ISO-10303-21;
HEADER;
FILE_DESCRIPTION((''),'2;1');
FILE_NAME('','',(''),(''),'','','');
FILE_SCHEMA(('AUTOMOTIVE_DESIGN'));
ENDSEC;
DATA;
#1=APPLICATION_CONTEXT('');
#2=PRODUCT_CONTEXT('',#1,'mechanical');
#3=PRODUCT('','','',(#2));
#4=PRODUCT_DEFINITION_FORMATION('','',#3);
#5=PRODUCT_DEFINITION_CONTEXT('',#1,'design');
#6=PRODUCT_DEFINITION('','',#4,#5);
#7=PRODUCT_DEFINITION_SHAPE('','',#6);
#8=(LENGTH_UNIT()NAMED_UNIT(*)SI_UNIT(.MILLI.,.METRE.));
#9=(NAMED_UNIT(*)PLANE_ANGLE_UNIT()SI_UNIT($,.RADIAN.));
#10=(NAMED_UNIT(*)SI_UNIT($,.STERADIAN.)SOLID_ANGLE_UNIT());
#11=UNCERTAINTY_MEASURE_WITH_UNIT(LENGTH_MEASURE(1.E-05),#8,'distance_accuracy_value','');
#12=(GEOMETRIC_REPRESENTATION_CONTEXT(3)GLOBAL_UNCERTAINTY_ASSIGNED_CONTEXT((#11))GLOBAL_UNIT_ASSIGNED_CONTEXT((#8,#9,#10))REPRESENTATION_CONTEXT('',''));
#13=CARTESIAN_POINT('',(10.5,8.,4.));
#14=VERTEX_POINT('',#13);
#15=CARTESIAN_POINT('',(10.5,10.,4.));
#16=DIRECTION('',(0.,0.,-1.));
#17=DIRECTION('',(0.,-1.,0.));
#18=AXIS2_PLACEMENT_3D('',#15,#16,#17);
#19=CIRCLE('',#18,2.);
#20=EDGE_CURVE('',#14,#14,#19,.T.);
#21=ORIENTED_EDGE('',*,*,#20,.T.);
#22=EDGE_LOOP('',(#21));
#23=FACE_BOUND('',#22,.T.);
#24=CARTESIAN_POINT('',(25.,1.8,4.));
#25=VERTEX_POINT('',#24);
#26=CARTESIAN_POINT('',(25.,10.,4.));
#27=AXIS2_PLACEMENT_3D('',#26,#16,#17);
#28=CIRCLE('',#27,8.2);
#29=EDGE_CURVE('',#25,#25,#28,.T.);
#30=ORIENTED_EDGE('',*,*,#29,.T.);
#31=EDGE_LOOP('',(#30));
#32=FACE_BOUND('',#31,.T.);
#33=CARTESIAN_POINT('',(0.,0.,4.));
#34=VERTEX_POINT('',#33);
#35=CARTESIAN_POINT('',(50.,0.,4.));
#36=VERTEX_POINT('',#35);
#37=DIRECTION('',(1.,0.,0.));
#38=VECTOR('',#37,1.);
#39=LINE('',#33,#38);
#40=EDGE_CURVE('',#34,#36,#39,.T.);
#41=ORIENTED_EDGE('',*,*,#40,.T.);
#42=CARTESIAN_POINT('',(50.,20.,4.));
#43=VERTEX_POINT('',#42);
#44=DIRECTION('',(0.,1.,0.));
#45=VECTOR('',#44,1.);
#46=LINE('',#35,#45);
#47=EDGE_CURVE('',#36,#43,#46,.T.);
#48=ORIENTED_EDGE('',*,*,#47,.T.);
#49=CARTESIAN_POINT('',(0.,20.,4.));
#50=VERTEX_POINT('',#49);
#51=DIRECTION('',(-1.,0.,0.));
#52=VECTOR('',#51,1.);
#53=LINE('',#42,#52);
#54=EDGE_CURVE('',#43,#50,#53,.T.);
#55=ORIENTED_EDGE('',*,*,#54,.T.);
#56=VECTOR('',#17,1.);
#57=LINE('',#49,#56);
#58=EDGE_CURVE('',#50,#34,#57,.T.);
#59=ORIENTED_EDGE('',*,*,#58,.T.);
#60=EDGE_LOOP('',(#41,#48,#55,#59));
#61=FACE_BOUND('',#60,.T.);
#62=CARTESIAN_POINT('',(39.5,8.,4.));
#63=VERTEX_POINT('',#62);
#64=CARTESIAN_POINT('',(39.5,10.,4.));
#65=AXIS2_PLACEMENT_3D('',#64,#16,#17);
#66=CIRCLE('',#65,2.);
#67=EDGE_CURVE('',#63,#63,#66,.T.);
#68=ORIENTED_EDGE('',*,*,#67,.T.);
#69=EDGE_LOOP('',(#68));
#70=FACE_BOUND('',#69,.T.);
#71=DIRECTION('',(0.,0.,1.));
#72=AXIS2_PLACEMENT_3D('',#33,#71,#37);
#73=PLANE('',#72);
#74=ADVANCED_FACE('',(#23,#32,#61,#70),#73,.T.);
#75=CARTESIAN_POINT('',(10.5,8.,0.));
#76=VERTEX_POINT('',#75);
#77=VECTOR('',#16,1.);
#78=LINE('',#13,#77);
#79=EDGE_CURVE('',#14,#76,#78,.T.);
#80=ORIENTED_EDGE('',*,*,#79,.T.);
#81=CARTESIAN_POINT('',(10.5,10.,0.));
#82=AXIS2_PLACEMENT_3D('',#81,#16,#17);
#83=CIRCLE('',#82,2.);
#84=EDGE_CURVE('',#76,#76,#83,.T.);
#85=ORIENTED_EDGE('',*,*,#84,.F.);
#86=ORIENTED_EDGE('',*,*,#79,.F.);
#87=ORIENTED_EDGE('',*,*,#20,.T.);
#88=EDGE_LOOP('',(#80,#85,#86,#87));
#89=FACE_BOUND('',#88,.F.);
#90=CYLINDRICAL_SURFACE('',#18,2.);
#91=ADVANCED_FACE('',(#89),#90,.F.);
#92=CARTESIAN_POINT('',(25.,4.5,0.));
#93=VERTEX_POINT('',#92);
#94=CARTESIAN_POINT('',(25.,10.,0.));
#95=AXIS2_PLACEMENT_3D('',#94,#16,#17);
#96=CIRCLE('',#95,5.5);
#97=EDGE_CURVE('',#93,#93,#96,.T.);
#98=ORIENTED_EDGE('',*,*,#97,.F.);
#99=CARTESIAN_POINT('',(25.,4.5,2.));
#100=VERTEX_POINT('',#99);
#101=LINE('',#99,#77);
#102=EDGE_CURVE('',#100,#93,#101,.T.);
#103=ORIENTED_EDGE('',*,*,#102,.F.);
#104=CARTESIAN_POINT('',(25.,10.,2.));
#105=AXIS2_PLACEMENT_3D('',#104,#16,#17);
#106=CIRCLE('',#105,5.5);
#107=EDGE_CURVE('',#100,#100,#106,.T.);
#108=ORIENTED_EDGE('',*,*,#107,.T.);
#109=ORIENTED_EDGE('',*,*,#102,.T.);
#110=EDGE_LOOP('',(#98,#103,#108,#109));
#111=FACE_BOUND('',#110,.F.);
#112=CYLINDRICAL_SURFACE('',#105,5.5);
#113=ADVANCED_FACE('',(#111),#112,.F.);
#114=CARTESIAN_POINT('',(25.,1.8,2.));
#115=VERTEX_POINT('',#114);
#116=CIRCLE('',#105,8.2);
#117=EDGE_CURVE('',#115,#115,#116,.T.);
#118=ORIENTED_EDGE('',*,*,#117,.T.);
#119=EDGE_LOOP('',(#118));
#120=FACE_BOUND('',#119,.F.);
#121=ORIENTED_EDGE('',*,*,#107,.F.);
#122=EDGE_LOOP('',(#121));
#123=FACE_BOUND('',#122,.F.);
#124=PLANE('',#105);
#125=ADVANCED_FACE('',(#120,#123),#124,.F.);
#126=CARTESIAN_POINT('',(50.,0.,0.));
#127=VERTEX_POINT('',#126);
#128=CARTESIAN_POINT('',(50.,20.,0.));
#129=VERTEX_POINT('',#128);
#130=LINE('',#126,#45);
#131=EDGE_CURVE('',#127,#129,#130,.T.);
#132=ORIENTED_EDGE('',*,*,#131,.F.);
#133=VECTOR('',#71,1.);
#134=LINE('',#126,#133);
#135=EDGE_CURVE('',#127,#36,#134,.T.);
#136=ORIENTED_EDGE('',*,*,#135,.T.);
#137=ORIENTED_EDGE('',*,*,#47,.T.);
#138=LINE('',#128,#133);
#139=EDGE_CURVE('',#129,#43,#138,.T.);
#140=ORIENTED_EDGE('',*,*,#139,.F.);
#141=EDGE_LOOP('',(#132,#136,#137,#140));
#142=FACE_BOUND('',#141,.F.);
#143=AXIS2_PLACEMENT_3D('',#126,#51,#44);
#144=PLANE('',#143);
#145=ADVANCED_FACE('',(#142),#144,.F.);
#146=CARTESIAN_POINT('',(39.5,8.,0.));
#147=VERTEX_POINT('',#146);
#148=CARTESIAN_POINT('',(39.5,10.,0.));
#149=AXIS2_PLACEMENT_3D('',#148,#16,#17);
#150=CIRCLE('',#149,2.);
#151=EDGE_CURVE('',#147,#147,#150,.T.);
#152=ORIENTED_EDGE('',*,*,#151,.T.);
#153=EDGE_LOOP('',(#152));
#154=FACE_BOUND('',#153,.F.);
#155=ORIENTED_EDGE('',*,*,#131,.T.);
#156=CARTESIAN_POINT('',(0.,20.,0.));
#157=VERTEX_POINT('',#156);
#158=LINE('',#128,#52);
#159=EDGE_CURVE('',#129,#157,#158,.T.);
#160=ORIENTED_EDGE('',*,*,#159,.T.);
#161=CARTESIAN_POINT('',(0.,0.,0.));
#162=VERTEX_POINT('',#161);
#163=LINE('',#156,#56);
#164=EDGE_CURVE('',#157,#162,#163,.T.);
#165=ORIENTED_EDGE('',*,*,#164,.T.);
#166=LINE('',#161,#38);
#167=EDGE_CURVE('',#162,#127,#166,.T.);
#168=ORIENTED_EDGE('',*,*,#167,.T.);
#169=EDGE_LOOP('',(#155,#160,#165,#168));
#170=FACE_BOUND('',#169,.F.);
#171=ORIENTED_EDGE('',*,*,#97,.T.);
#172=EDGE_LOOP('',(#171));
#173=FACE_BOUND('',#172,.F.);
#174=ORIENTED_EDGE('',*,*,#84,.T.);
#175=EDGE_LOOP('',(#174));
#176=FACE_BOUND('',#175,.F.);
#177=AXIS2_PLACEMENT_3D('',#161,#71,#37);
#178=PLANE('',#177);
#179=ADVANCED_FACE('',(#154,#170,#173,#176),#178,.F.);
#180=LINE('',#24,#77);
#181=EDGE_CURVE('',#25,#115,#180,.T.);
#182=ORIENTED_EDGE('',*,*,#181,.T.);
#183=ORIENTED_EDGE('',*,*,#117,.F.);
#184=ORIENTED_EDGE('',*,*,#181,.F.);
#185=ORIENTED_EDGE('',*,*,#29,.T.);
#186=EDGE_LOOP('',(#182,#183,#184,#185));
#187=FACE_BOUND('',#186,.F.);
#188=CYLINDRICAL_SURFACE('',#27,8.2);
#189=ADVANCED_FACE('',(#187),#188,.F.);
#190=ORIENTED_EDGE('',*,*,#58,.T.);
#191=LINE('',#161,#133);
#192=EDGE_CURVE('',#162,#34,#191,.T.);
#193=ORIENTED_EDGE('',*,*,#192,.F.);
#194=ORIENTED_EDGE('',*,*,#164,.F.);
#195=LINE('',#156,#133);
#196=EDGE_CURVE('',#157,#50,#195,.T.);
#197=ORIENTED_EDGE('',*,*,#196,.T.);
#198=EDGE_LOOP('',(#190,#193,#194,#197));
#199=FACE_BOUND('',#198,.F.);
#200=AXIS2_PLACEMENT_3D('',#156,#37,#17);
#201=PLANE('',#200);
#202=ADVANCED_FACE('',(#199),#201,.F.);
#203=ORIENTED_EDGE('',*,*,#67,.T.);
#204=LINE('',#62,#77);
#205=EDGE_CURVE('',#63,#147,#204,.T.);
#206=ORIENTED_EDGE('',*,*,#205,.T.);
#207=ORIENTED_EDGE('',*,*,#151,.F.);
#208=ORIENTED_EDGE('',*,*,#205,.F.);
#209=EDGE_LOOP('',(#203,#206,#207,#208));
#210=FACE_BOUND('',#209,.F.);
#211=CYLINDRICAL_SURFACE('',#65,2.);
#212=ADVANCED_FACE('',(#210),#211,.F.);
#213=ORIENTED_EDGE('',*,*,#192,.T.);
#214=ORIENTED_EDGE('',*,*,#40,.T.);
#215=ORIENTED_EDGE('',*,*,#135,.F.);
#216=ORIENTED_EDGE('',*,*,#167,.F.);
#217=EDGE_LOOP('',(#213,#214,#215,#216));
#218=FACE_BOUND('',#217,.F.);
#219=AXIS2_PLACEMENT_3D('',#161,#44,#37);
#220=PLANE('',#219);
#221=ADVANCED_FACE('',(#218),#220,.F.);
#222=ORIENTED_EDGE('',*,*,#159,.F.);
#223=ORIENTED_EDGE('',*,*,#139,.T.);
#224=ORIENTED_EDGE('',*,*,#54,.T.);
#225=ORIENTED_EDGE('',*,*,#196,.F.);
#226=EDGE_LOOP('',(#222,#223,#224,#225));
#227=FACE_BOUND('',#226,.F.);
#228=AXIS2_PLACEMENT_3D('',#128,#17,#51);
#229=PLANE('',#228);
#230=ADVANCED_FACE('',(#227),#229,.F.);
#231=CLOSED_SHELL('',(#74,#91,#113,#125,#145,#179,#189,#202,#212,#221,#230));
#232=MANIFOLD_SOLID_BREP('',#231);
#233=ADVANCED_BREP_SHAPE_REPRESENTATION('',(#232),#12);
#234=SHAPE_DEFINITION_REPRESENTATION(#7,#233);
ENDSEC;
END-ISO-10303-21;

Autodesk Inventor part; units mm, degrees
ref_plane "YZ Plane" through (0, 0, 0) normal (1, 0, 0) x (0, 1, 0)
ref_plane "XZ Plane" through (0, 0, 0) normal (0, 1, 0) x (-1, 0, 0)
ref_plane "XY Plane" through (0, 0, 0) normal (0, 0, 1) x (1, 0, 0)
sketch "Sketch1" plane through (0, 0, 0) normal (0, 0, 1) x (1, 0, 0)
  line L0 (0, 0) -> (50, 0)
  line L1 (50, 0) -> (50, 20)
  line L2 (50, 20) -> (0, 20)
  line L3 (0, 20) -> (0, 0)
  dimension "d0" = 50
  dimension "d1" = 20
extrude "Extrusion1" add sketch "Sketch1" along normal blind 4
sketch "Sketch2" plane through (0, 0, 4) normal (0, 0, 1) x (1, 0, 0)
  line L0 (50, 20) -> (0, 20) projected
  line L1 (0, 20) -> (0, 0) projected
  point P0 (25, 10)
  dimension "d11" = 10
  dimension "d12" = 25
hole "Hole1" at (25, 10, 4) direction (0, 0, -1) diameter 11 depth 4 tip angle 118 counterbore diameter 16.4 counterbore depth 2
sketch "Sketch3" plane through (0, 0, 4) normal (0, 0, 1) x (1, 0, 0)
  line L0 (50, 0) -> (50, 20) projected
  line L1 (50, 20) -> (0, 20) projected
  point P0 (0, 0)
  point P1 (39.5, 10)
  dimension "d21" = 10.5
  dimension "d22" = 10
hole "Hole2" at (39.5, 10, 4) direction (0, 0, -1) diameter 4 end through all
sketch "Sketch4" plane through (0, 0, 4) normal (0, 0, 1) x (1, 0, 0)
  line L0 (0, 0) -> (50, 0) projected
  line L1 (50, 0) -> (50, 20) projected
  point P0 (39.5, 5.9723)
  dimension "d30" = 5.9723
  dimension "d31" = 10.5
hole "Hole3" at (39.5, 5.9723, 4) direction (0, 0, -1) diameter 4 end through all
sketch "Sketch5" plane through (0, 0, 4) normal (0, 0, 1) x (1, 0, 0)
  line L0 (50, 20) -> (0, 20) projected
  line L1 (0, 20) -> (0, 0) projected
  point P0 (10.5, 10)
  dimension "d46" = 10
  dimension "d47" = 10.5
hole "Hole4" at (10.5, 10, 4) direction (0, 0, -1) diameter 4 end through all
sketch "Sketch6" plane through (0, 0, 4) normal (0, 0, 1) x (1, 0, 0)
  line L0 (0, 20) -> (0, 0) projected
  line L1 (0, 0) -> (50, 0) projected
  point P0 (10.5, 5.9723)
  dimension "d48" = 10.5
  dimension "d49" = 5.9723
hole "Hole5" at (10.5, 5.9723, 4) direction (0, 0, -1) diameter 4 end through all
delete faces "Delete Face1" heal yes whole lump no faces at (10.8208, 3.9982, 2.6667)
delete faces "Delete Face2" heal yes whole lump no faces at (40.1333, 4.0752, 2.6667)
properties part number "bottom"
